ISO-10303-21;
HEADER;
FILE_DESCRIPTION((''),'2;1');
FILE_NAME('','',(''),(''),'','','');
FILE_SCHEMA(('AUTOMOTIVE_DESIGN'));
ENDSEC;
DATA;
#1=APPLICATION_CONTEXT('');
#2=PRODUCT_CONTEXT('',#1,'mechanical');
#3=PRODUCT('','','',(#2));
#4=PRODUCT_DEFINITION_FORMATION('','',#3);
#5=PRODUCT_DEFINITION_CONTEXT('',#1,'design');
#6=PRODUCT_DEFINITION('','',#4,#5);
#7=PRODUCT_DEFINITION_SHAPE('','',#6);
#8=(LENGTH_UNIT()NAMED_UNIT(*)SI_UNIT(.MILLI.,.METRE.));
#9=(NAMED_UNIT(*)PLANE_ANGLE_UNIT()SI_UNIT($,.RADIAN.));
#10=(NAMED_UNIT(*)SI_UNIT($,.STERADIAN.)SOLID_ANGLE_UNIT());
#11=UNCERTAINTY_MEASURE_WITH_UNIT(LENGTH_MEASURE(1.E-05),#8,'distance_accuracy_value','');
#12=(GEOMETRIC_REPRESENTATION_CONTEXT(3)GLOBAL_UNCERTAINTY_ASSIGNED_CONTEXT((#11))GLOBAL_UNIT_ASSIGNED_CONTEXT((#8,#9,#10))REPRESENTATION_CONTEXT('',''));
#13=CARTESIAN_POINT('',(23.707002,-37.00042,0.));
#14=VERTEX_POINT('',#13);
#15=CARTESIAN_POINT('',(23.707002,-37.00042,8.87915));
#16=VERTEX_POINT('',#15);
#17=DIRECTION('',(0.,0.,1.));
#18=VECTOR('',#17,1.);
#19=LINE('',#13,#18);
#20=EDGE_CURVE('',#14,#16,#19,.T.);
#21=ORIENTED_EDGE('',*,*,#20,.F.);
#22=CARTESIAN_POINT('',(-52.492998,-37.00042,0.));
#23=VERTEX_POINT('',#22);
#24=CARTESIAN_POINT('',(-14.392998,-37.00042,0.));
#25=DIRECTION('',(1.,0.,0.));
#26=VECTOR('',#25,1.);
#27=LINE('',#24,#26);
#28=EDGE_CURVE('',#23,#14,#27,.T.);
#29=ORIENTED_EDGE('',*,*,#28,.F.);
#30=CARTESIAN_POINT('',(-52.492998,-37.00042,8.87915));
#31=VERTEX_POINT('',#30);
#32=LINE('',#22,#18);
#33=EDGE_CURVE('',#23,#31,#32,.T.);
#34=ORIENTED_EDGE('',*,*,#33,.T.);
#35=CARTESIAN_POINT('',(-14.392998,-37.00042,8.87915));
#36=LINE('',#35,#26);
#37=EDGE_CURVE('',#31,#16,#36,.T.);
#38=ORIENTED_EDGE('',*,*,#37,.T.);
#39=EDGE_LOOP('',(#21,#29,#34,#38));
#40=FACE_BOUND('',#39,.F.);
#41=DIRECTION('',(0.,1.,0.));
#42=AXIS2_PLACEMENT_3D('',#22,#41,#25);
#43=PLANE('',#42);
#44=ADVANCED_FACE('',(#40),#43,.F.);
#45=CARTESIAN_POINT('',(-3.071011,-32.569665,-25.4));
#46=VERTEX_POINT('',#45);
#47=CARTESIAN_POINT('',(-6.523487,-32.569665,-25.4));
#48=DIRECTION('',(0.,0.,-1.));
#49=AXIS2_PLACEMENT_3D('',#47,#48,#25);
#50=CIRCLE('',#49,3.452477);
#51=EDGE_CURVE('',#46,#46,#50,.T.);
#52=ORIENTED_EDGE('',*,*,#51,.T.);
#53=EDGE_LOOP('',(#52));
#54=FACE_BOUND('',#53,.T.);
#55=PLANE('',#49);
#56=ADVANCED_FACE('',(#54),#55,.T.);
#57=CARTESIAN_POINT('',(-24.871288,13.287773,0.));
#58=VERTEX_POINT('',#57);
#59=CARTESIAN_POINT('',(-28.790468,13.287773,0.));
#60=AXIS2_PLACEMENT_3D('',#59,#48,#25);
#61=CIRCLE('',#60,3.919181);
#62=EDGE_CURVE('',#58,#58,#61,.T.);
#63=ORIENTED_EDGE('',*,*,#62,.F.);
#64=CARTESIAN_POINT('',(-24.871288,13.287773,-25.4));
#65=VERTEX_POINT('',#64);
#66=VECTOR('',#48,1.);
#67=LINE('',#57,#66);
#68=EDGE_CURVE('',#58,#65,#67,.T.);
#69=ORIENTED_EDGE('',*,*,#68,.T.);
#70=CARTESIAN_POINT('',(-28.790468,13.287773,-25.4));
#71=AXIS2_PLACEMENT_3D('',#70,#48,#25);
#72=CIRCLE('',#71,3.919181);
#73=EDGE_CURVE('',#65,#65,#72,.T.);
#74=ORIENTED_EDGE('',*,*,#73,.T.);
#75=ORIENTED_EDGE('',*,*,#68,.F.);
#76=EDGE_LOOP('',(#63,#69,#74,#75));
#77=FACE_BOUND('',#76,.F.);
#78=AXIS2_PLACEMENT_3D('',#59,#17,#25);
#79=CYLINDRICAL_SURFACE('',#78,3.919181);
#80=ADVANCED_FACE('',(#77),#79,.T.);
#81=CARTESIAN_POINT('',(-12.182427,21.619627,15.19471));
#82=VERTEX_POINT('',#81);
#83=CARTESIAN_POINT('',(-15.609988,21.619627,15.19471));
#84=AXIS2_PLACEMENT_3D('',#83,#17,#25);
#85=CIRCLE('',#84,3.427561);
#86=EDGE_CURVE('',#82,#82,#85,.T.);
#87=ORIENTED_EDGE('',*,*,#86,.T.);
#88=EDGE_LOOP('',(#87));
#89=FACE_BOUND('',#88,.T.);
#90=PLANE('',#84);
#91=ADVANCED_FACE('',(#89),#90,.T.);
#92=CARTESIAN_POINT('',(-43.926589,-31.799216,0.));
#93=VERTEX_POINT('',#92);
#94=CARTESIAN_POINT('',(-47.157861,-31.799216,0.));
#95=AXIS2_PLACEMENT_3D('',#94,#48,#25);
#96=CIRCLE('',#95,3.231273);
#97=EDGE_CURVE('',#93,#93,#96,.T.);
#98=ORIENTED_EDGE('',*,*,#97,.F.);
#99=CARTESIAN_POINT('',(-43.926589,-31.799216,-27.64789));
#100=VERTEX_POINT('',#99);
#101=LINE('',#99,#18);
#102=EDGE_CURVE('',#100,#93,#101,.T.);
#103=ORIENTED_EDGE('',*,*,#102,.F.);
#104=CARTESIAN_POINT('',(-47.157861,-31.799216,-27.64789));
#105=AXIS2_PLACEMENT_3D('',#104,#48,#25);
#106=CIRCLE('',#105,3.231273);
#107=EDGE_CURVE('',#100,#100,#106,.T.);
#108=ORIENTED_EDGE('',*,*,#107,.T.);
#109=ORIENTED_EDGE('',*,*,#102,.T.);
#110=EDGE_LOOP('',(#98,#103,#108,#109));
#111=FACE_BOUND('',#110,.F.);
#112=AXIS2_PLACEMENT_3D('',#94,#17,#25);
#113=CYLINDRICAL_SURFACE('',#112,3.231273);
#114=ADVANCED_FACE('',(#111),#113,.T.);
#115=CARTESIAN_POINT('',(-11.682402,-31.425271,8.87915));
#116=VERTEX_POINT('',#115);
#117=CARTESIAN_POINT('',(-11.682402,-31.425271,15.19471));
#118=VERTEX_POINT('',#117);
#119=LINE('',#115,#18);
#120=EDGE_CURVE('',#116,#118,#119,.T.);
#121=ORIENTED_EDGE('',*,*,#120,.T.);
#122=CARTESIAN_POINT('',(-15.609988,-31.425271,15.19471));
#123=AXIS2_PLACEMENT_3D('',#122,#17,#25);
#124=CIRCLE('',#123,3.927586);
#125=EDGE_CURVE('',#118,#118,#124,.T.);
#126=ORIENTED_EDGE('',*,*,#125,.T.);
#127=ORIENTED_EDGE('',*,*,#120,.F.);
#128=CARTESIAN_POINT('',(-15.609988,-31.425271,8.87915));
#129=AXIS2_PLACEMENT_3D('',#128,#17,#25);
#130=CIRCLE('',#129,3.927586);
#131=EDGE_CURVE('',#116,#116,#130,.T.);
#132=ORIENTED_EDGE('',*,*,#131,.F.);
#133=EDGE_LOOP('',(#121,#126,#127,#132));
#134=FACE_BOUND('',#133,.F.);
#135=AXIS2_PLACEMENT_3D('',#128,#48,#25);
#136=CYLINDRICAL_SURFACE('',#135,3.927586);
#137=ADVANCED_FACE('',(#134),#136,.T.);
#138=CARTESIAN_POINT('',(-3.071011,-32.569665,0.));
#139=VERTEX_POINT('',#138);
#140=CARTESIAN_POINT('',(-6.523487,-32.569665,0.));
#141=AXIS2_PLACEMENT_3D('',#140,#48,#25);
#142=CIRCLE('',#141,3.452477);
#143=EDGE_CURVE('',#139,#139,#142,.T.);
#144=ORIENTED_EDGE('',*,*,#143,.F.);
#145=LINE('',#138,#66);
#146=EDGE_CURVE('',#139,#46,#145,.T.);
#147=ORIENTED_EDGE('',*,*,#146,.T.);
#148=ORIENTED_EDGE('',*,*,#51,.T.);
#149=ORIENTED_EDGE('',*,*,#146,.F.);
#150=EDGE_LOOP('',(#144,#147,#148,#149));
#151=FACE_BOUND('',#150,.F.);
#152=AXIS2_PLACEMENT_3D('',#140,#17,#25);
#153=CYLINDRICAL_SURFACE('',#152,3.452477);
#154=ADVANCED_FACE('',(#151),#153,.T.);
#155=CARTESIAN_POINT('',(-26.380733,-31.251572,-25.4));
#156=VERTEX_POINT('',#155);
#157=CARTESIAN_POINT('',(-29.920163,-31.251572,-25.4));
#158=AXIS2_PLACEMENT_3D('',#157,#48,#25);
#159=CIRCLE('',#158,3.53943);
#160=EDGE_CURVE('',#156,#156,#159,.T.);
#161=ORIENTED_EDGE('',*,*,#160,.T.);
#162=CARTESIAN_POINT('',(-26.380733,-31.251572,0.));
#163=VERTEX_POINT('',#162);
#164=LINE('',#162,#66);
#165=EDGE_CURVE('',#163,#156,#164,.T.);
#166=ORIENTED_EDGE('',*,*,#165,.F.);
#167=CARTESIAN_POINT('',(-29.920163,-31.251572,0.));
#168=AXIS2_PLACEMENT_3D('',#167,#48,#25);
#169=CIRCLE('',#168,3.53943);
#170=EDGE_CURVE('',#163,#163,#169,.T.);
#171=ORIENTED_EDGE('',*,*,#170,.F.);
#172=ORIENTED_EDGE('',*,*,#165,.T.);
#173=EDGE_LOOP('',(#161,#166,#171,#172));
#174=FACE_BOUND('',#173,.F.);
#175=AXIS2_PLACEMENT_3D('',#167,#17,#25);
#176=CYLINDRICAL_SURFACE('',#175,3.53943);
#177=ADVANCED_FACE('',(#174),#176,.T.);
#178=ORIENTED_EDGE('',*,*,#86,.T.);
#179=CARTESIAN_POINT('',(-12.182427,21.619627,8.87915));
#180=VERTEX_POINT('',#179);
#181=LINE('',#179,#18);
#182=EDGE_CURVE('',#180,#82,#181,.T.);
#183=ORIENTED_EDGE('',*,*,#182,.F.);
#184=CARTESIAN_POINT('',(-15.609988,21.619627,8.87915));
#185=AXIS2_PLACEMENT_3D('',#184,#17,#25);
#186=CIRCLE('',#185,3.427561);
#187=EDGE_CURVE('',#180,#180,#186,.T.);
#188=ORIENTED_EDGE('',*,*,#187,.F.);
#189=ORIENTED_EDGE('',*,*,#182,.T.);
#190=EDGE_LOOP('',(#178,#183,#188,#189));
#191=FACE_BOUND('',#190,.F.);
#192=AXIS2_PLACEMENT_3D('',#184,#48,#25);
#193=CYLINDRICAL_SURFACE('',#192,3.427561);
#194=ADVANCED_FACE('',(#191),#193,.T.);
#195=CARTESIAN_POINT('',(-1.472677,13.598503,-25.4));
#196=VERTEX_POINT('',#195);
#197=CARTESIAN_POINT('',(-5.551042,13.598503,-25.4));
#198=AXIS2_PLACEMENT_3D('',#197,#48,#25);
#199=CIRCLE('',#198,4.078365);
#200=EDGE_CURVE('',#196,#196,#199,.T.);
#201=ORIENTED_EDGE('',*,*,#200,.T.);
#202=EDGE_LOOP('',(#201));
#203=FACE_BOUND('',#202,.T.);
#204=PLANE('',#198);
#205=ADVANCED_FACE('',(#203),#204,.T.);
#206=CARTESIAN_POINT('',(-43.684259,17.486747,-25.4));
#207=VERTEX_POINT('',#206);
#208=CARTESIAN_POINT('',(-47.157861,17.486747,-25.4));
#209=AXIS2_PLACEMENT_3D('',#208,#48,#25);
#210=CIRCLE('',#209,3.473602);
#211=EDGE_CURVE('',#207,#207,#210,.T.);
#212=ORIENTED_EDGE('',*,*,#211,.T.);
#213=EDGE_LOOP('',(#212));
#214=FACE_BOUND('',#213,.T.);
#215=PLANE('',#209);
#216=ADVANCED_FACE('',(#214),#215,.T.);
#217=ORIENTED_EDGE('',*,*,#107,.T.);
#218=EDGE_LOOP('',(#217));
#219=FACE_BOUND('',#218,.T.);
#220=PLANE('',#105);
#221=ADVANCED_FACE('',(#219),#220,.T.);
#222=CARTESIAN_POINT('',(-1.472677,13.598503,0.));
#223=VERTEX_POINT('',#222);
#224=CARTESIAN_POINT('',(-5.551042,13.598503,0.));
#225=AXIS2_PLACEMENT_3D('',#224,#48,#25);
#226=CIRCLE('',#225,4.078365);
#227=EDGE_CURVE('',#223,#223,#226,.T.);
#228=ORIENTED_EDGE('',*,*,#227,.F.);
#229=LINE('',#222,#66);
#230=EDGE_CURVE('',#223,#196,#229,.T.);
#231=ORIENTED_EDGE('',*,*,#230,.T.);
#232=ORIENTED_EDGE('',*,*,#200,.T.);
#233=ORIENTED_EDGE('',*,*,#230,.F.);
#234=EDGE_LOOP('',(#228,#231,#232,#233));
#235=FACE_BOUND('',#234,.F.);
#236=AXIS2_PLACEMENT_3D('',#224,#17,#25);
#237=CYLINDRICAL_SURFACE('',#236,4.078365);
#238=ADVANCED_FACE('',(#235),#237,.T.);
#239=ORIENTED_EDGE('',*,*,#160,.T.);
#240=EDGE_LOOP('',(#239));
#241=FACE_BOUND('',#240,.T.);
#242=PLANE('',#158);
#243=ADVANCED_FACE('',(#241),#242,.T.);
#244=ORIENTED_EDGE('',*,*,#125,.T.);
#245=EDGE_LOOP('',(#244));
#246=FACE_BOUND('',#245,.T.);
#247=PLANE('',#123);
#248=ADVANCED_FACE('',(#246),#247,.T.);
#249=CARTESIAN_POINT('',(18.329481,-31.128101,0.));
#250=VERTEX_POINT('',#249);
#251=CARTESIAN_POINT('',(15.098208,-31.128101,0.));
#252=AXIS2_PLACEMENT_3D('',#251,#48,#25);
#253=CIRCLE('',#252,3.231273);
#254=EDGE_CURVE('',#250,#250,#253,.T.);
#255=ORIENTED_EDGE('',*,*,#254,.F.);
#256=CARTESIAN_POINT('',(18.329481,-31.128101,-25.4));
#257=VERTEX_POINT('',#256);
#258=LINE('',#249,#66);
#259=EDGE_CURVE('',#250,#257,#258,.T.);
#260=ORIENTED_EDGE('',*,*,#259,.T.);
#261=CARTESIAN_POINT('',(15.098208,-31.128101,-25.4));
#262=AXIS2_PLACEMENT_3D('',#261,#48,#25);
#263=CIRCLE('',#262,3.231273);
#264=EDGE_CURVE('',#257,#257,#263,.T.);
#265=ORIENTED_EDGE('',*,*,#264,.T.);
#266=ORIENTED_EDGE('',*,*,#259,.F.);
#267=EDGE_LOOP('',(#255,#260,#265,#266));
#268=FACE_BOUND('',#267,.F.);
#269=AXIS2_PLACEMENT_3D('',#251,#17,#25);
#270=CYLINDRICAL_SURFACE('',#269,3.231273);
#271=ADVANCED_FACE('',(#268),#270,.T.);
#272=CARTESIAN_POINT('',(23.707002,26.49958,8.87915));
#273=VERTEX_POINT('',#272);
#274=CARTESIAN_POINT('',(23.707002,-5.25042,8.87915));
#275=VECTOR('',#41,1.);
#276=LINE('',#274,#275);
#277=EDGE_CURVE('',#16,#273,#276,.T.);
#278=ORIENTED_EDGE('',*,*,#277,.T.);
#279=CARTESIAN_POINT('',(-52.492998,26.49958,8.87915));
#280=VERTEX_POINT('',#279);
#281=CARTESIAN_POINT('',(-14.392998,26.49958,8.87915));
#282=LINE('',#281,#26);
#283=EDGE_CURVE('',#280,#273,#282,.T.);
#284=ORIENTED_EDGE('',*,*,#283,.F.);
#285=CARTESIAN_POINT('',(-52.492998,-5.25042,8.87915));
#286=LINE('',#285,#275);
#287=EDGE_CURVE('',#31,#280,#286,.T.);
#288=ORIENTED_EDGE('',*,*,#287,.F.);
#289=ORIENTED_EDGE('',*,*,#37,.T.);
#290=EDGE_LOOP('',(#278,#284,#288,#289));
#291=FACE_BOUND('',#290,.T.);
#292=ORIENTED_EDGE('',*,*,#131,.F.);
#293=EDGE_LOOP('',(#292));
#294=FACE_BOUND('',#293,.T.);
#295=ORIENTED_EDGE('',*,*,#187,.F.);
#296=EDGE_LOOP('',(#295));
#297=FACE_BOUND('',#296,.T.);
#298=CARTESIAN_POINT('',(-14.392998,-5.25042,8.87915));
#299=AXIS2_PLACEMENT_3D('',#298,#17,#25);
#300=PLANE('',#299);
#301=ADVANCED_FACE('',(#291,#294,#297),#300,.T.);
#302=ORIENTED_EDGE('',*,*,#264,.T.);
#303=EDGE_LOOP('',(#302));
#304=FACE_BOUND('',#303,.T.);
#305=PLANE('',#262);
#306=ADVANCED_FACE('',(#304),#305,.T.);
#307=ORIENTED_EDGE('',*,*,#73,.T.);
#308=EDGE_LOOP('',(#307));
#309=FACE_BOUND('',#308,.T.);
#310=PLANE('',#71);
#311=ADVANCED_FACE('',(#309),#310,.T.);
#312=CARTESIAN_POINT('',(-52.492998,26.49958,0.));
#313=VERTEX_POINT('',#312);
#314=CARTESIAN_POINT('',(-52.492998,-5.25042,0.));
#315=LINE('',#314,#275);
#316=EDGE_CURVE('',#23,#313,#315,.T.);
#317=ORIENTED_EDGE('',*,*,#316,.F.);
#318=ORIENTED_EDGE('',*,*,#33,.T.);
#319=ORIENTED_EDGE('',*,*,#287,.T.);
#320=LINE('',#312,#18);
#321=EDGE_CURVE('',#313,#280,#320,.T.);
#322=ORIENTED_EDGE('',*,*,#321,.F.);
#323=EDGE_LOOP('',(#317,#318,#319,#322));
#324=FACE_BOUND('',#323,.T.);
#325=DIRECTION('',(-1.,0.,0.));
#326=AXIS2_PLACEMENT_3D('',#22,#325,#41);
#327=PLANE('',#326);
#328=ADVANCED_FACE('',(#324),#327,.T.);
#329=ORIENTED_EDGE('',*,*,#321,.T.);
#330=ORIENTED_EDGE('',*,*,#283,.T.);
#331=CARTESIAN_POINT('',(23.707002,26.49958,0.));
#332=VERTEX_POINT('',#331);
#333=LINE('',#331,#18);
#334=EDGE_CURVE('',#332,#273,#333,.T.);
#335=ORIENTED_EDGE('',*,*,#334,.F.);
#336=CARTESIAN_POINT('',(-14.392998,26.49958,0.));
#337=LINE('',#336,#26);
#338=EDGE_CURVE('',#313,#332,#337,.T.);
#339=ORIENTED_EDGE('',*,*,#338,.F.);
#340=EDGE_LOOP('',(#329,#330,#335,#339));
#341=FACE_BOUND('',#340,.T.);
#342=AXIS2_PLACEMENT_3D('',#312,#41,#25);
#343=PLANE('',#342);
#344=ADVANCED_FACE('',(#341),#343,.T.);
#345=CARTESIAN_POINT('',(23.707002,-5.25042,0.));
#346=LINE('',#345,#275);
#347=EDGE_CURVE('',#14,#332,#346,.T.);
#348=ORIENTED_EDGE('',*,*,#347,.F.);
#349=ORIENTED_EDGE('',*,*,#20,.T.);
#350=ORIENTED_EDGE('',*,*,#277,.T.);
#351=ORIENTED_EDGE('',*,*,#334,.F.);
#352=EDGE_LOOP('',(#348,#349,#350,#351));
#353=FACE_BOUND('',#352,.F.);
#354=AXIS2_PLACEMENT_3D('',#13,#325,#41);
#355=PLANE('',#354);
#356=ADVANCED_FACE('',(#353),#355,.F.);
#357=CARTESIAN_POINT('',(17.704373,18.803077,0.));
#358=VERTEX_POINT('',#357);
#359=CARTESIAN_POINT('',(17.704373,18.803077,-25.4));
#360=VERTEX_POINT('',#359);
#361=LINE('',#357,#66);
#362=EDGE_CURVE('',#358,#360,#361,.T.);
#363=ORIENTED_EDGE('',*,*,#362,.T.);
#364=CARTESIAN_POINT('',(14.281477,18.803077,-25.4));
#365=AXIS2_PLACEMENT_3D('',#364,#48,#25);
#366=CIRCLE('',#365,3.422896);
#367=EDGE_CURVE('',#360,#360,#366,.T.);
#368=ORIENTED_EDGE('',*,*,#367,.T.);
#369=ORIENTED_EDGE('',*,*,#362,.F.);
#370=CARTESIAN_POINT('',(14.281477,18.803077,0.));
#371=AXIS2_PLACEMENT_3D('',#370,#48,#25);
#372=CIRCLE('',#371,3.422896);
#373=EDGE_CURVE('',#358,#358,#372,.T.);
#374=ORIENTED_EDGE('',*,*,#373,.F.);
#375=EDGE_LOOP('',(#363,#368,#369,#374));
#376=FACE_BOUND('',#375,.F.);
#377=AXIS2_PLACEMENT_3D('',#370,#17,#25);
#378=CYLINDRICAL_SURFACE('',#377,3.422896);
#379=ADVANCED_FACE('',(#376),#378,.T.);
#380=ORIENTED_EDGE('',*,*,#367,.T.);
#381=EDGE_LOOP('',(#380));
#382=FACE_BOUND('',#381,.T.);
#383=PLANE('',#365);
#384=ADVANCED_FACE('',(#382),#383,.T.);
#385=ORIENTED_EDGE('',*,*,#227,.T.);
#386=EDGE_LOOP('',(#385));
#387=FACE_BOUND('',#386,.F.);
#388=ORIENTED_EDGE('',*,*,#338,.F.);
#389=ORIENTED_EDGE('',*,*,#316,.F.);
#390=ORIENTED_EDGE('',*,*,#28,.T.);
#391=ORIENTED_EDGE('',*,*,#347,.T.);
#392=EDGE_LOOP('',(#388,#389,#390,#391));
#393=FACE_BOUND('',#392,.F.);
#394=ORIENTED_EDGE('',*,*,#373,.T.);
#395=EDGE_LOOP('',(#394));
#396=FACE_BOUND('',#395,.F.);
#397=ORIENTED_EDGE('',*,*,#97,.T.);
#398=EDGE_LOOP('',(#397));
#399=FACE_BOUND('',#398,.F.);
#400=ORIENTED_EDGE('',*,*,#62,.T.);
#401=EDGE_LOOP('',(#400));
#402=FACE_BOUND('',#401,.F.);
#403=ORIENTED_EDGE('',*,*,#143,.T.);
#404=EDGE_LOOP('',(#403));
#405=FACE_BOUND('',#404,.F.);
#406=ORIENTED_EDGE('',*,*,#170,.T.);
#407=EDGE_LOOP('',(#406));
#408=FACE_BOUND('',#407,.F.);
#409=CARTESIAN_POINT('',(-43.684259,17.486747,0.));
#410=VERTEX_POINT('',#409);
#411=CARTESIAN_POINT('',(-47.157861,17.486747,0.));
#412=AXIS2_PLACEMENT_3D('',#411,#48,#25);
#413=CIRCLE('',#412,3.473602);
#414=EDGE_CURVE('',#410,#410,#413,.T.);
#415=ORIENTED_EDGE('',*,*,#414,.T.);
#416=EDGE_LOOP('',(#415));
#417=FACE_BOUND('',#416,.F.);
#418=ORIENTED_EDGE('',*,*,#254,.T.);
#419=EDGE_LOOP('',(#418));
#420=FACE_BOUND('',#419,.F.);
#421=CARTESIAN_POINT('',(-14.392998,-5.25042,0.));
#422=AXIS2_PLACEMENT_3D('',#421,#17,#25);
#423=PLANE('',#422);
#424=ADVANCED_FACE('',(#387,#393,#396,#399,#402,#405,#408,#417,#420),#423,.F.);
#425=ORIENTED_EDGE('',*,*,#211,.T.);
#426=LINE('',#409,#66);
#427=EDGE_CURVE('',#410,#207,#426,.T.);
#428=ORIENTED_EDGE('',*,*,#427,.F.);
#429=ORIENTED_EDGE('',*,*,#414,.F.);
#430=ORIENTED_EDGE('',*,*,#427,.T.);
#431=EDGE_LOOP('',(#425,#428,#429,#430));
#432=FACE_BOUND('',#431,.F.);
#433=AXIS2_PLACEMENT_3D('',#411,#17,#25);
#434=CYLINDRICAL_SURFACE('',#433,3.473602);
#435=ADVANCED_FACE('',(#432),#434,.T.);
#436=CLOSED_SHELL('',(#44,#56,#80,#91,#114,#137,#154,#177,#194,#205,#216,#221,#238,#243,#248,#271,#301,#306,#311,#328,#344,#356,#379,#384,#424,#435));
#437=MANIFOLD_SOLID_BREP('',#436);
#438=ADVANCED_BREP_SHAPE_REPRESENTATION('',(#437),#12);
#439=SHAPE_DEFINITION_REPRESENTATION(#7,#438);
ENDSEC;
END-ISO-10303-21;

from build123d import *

# Parameters (mm, degrees)
F0_W      = 76.2
F0_H      = 63.5
F1_DEPTH  = 8.87915
F2_R      = 3.2312727432
F3_DEPTH  = 27.64789
F2_R_2    = 3.4736024705
F2_R_3    = 3.4228960701
F2_R_4    = 3.2312730123
F4_DEPTH  = 25.4
F5_R      = 3.9275858197
F5_R_2    = 3.4275613836
F6_DEPTH  = 6.31556
F9_R      = 4.0783648595
F9_R_2    = 3.9191806832
F9_R_3    = 3.5394300608
F9_R_4    = 3.4524766022
F10_DEPTH = 25.4


# Not quite as in the source:
# - the program builds the solid bodies; features that only make, move or delete a surface that nothing else refers to are left out


with BuildPart() as f1:
    # F0 (on Top) → F1 (new body)
    with BuildSketch(Plane.XY):
        with Locations((-14.3929980695, -5.2504202625)):
            Rectangle(F0_W, F0_H)
    extrude(amount=F1_DEPTH)

    # F2 (on face) → F3 (join)
    with BuildSketch(Plane(origin=(0, 0, 0), x_dir=(1, 0, 0), z_dir=(0, 0, -1))):
        with Locations((-47.1578612924, 31.7992158234)):
            Circle(F2_R)
    extrude(amount=F3_DEPTH)

    # F2 (on face) → F4 (join)
    with BuildSketch(Plane(origin=(0, 0, 0), x_dir=(1, 0, 0), z_dir=(0, 0, -1))):
        with Locations((-47.1578612924, 31.7992158234)):
            Circle(F2_R)
        with Locations((-47.1578612924, -17.4867473543)):
            Circle(F2_R_2)
        with Locations((14.2814768478, -18.8030768186)):
            Circle(F2_R_3)
        with Locations((15.0982076302, 31.1281010509)):
            Circle(F2_R_4)
    extrude(amount=F4_DEPTH)

    # F5 (on face) → F6 (join)
    with BuildSketch(Plane.XY.offset(8.87915)):
        with Locations((-15.6099880114, -31.4252711833)):
            Circle(F5_R)
        with Locations((-15.6099880114, 21.6196272522)):
            Circle(F5_R_2)
    extrude(amount=F6_DEPTH)

    # F9 (on face) → F10 (join)
    with BuildSketch(Plane(origin=(0, 0, 0), x_dir=(1, 0, 0), z_dir=(0, 0, -1))):
        with Locations((-5.5510420352, -13.5985026136)):
            Circle(F9_R)
        with Locations((-28.7904683501, -13.2877733558)):
            Circle(F9_R_2)
        with Locations((-29.9201626331, 31.2515720725)):
            Circle(F9_R_3)
        with Locations((-6.5234871581, 32.5696654618)):
            Circle(F9_R_4)
    extrude(amount=F10_DEPTH)


solid = f1.part
